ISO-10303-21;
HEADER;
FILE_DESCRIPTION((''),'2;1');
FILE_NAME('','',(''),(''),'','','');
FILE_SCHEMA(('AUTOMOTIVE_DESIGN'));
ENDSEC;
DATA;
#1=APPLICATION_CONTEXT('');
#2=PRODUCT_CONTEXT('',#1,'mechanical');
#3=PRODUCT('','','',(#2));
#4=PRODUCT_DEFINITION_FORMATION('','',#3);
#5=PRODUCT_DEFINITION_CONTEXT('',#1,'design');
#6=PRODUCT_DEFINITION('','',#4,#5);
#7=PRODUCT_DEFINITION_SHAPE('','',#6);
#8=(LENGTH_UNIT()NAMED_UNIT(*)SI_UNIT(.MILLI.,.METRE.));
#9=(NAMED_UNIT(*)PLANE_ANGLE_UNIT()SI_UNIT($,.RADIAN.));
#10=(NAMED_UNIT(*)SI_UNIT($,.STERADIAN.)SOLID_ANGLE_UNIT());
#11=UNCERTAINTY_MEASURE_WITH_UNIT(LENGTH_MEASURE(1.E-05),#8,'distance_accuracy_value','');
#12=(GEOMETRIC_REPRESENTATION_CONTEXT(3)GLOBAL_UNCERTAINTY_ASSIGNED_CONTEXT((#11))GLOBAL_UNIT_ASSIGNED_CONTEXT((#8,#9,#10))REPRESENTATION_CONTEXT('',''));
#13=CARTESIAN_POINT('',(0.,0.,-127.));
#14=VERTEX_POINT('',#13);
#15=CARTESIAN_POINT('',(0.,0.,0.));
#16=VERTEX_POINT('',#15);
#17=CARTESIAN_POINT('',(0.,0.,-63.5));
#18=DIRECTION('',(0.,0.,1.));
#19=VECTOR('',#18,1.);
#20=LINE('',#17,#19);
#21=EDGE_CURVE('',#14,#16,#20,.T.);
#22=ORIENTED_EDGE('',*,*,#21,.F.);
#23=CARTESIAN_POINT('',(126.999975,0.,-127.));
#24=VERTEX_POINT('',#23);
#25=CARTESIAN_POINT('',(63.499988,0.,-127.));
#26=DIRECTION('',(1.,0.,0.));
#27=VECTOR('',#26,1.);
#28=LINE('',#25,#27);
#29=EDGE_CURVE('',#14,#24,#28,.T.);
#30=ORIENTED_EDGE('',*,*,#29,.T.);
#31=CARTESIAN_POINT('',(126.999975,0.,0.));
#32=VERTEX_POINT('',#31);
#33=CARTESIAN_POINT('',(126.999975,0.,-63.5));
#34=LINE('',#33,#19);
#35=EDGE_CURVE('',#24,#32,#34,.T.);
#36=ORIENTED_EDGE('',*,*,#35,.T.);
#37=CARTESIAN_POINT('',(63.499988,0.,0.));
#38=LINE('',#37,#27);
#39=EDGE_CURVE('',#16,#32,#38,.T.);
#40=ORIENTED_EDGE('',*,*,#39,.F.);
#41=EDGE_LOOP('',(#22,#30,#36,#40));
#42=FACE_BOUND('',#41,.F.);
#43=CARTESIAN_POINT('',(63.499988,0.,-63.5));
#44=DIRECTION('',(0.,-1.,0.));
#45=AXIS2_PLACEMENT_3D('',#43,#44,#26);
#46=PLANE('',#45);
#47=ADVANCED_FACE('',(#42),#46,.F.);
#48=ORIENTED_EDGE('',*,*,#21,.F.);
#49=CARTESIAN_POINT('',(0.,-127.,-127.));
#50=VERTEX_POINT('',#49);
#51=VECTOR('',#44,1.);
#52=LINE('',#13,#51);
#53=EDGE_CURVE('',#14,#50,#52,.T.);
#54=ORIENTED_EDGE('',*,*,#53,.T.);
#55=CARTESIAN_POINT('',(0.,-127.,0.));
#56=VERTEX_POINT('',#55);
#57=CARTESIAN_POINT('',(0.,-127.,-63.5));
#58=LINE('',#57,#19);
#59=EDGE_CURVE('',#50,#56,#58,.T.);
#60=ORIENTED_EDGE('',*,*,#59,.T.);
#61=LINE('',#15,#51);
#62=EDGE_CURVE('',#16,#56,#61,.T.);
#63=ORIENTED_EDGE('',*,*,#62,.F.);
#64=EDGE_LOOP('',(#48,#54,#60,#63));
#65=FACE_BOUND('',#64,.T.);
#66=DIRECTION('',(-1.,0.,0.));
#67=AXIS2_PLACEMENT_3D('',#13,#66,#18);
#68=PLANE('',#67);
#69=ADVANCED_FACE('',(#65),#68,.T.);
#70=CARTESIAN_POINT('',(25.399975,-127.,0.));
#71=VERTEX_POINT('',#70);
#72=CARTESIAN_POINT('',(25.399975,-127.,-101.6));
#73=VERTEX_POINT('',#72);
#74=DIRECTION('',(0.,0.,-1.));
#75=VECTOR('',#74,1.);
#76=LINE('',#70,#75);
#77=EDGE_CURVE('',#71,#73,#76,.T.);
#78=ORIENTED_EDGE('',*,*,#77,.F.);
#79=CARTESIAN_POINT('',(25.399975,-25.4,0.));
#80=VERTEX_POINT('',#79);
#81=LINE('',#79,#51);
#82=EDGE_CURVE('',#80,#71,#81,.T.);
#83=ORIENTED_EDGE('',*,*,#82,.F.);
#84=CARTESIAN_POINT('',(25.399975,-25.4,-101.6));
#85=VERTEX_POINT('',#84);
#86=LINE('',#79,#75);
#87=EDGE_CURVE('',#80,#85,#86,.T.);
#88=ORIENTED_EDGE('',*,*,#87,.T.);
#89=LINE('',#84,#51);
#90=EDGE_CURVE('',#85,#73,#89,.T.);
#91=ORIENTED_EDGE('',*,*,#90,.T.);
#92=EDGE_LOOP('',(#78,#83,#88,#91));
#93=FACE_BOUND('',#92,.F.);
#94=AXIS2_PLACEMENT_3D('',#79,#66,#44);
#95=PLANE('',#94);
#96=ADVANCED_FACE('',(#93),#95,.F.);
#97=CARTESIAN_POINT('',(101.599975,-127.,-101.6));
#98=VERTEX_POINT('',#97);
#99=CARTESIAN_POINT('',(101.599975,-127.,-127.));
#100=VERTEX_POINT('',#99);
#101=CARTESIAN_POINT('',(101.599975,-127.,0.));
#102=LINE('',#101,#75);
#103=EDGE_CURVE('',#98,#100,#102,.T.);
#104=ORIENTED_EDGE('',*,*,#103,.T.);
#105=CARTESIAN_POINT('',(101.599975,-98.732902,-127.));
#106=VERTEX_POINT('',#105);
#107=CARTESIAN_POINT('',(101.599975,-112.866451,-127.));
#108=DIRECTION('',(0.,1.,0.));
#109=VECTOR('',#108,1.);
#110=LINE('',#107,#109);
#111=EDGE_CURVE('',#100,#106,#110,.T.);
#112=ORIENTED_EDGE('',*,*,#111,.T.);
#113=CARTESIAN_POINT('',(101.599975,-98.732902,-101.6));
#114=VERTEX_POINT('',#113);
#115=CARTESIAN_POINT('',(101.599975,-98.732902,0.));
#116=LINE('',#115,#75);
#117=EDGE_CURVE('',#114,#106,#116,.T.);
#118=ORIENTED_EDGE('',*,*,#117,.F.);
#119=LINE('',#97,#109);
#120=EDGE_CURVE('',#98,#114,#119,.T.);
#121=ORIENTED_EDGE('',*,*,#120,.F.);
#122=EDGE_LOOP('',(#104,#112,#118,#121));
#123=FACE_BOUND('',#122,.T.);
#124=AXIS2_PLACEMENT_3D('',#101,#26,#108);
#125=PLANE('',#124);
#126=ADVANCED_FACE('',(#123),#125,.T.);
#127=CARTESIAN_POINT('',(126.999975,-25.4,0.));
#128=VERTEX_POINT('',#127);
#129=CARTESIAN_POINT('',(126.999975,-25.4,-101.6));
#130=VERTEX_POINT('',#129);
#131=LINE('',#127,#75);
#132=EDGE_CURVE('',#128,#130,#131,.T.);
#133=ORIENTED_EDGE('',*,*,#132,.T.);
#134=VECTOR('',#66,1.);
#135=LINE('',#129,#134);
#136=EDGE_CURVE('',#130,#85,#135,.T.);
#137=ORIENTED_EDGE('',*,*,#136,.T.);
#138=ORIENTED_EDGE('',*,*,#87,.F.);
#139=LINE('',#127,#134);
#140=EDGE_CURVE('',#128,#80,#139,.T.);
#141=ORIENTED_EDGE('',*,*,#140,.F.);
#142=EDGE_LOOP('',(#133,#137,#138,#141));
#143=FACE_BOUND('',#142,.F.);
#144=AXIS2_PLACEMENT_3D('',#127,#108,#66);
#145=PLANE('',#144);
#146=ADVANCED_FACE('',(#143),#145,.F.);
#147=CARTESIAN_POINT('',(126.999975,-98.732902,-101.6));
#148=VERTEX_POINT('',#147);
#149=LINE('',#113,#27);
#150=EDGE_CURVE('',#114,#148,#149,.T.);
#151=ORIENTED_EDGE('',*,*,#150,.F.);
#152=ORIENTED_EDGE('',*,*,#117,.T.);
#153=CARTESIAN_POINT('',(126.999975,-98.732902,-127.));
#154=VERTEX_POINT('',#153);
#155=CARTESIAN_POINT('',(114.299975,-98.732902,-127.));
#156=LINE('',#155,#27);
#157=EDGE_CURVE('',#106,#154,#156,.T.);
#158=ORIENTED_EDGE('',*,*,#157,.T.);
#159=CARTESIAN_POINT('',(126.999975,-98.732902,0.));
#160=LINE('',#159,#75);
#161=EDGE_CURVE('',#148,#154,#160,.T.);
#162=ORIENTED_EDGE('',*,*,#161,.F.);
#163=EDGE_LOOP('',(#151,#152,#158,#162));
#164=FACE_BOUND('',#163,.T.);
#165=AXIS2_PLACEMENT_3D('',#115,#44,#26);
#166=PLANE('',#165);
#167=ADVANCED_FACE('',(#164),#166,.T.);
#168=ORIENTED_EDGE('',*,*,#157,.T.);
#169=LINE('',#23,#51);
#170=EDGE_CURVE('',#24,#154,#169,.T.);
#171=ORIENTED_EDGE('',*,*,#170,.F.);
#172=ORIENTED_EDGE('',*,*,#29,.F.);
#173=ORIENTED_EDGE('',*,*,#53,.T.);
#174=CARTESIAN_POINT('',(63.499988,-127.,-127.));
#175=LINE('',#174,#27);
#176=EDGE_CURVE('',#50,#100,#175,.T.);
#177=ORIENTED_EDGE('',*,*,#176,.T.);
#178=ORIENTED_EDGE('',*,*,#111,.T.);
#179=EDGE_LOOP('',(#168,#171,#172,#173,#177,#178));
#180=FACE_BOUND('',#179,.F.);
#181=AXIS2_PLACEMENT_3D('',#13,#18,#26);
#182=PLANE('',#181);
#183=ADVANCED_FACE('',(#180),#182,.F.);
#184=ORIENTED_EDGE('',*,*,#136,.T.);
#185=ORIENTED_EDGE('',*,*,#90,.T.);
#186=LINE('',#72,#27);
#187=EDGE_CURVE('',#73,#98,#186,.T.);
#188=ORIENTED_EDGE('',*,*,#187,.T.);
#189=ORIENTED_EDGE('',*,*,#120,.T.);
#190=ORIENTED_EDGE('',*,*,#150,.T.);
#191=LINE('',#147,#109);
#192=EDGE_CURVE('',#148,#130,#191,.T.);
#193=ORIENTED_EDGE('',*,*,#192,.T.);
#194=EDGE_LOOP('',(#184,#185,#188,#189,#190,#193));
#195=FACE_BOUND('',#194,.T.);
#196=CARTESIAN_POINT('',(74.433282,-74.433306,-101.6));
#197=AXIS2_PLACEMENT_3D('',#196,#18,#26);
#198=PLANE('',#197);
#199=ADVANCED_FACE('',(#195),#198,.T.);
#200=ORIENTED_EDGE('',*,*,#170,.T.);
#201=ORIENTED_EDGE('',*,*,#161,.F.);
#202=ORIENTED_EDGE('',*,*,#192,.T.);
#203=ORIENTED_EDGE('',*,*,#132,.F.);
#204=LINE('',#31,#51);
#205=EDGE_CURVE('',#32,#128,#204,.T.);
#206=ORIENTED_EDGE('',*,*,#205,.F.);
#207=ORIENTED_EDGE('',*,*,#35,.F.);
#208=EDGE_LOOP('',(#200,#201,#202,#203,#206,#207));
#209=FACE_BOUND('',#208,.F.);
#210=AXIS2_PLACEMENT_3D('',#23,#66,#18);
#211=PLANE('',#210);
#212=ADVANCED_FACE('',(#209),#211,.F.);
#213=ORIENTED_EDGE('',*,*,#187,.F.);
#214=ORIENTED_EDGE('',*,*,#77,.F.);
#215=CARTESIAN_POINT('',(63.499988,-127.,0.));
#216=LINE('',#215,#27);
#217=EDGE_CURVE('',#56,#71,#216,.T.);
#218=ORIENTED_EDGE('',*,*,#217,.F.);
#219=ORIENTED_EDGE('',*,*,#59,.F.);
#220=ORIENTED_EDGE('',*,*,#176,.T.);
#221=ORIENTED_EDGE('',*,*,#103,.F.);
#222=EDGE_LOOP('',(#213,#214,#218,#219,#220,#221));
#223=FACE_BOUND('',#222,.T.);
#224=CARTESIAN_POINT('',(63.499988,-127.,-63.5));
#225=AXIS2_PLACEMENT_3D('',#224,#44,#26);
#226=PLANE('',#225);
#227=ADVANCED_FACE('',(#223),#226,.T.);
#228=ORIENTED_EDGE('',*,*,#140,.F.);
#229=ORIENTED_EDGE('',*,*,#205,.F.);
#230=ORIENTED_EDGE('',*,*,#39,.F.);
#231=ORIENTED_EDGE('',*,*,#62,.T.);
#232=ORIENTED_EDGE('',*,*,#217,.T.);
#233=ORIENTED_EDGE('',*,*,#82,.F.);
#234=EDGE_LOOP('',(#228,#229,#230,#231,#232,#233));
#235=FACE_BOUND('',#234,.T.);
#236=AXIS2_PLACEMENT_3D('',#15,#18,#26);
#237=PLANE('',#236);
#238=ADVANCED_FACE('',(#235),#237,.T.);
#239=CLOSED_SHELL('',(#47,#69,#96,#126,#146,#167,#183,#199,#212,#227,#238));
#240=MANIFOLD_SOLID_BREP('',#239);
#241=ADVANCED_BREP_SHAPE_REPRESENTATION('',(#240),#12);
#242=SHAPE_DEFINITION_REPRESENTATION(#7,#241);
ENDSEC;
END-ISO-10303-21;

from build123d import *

# Parameters (mm, degrees)
F0_W     = 126.9999751441
F0_H     = 127
F1_DEPTH = 127
F2_W     = 25.4
F2_H     = 28.2670979543
F3_DEPTH = 127
F5_DEPTH = 101.6


# Not quite as in the source:
# - a feature names something its author has since deleted; it is built from what else it names


with BuildPart() as f1:
    # F0 (on Front) → F1 (new body)
    with BuildSketch(Plane.XZ):
        with Locations((63.4999875721, -63.5)):
            Rectangle(F0_W, F0_H)
    extrude(amount=F1_DEPTH)

    # F2 (on face) → F3 (cut)
    with BuildSketch(Plane.XY):
        with Locations((114.2999751441, -112.8664510228)):
            Rectangle(F2_W, F2_H)
    extrude(amount=-F3_DEPTH, mode=Mode.SUBTRACT)

    # F4 (on face) → F5 (cut)
    with BuildSketch(Plane.XY):
        Polygon((25.3999751441, -25.4), (25.3999751441, -127), (101.5999751441, -127), (101.5999751441, -98.7329020457), (126.9999751441, -98.7329020457), (126.9999751441, -25.4), align=None)
    extrude(amount=-F5_DEPTH, mode=Mode.SUBTRACT)


solid = f1.part
